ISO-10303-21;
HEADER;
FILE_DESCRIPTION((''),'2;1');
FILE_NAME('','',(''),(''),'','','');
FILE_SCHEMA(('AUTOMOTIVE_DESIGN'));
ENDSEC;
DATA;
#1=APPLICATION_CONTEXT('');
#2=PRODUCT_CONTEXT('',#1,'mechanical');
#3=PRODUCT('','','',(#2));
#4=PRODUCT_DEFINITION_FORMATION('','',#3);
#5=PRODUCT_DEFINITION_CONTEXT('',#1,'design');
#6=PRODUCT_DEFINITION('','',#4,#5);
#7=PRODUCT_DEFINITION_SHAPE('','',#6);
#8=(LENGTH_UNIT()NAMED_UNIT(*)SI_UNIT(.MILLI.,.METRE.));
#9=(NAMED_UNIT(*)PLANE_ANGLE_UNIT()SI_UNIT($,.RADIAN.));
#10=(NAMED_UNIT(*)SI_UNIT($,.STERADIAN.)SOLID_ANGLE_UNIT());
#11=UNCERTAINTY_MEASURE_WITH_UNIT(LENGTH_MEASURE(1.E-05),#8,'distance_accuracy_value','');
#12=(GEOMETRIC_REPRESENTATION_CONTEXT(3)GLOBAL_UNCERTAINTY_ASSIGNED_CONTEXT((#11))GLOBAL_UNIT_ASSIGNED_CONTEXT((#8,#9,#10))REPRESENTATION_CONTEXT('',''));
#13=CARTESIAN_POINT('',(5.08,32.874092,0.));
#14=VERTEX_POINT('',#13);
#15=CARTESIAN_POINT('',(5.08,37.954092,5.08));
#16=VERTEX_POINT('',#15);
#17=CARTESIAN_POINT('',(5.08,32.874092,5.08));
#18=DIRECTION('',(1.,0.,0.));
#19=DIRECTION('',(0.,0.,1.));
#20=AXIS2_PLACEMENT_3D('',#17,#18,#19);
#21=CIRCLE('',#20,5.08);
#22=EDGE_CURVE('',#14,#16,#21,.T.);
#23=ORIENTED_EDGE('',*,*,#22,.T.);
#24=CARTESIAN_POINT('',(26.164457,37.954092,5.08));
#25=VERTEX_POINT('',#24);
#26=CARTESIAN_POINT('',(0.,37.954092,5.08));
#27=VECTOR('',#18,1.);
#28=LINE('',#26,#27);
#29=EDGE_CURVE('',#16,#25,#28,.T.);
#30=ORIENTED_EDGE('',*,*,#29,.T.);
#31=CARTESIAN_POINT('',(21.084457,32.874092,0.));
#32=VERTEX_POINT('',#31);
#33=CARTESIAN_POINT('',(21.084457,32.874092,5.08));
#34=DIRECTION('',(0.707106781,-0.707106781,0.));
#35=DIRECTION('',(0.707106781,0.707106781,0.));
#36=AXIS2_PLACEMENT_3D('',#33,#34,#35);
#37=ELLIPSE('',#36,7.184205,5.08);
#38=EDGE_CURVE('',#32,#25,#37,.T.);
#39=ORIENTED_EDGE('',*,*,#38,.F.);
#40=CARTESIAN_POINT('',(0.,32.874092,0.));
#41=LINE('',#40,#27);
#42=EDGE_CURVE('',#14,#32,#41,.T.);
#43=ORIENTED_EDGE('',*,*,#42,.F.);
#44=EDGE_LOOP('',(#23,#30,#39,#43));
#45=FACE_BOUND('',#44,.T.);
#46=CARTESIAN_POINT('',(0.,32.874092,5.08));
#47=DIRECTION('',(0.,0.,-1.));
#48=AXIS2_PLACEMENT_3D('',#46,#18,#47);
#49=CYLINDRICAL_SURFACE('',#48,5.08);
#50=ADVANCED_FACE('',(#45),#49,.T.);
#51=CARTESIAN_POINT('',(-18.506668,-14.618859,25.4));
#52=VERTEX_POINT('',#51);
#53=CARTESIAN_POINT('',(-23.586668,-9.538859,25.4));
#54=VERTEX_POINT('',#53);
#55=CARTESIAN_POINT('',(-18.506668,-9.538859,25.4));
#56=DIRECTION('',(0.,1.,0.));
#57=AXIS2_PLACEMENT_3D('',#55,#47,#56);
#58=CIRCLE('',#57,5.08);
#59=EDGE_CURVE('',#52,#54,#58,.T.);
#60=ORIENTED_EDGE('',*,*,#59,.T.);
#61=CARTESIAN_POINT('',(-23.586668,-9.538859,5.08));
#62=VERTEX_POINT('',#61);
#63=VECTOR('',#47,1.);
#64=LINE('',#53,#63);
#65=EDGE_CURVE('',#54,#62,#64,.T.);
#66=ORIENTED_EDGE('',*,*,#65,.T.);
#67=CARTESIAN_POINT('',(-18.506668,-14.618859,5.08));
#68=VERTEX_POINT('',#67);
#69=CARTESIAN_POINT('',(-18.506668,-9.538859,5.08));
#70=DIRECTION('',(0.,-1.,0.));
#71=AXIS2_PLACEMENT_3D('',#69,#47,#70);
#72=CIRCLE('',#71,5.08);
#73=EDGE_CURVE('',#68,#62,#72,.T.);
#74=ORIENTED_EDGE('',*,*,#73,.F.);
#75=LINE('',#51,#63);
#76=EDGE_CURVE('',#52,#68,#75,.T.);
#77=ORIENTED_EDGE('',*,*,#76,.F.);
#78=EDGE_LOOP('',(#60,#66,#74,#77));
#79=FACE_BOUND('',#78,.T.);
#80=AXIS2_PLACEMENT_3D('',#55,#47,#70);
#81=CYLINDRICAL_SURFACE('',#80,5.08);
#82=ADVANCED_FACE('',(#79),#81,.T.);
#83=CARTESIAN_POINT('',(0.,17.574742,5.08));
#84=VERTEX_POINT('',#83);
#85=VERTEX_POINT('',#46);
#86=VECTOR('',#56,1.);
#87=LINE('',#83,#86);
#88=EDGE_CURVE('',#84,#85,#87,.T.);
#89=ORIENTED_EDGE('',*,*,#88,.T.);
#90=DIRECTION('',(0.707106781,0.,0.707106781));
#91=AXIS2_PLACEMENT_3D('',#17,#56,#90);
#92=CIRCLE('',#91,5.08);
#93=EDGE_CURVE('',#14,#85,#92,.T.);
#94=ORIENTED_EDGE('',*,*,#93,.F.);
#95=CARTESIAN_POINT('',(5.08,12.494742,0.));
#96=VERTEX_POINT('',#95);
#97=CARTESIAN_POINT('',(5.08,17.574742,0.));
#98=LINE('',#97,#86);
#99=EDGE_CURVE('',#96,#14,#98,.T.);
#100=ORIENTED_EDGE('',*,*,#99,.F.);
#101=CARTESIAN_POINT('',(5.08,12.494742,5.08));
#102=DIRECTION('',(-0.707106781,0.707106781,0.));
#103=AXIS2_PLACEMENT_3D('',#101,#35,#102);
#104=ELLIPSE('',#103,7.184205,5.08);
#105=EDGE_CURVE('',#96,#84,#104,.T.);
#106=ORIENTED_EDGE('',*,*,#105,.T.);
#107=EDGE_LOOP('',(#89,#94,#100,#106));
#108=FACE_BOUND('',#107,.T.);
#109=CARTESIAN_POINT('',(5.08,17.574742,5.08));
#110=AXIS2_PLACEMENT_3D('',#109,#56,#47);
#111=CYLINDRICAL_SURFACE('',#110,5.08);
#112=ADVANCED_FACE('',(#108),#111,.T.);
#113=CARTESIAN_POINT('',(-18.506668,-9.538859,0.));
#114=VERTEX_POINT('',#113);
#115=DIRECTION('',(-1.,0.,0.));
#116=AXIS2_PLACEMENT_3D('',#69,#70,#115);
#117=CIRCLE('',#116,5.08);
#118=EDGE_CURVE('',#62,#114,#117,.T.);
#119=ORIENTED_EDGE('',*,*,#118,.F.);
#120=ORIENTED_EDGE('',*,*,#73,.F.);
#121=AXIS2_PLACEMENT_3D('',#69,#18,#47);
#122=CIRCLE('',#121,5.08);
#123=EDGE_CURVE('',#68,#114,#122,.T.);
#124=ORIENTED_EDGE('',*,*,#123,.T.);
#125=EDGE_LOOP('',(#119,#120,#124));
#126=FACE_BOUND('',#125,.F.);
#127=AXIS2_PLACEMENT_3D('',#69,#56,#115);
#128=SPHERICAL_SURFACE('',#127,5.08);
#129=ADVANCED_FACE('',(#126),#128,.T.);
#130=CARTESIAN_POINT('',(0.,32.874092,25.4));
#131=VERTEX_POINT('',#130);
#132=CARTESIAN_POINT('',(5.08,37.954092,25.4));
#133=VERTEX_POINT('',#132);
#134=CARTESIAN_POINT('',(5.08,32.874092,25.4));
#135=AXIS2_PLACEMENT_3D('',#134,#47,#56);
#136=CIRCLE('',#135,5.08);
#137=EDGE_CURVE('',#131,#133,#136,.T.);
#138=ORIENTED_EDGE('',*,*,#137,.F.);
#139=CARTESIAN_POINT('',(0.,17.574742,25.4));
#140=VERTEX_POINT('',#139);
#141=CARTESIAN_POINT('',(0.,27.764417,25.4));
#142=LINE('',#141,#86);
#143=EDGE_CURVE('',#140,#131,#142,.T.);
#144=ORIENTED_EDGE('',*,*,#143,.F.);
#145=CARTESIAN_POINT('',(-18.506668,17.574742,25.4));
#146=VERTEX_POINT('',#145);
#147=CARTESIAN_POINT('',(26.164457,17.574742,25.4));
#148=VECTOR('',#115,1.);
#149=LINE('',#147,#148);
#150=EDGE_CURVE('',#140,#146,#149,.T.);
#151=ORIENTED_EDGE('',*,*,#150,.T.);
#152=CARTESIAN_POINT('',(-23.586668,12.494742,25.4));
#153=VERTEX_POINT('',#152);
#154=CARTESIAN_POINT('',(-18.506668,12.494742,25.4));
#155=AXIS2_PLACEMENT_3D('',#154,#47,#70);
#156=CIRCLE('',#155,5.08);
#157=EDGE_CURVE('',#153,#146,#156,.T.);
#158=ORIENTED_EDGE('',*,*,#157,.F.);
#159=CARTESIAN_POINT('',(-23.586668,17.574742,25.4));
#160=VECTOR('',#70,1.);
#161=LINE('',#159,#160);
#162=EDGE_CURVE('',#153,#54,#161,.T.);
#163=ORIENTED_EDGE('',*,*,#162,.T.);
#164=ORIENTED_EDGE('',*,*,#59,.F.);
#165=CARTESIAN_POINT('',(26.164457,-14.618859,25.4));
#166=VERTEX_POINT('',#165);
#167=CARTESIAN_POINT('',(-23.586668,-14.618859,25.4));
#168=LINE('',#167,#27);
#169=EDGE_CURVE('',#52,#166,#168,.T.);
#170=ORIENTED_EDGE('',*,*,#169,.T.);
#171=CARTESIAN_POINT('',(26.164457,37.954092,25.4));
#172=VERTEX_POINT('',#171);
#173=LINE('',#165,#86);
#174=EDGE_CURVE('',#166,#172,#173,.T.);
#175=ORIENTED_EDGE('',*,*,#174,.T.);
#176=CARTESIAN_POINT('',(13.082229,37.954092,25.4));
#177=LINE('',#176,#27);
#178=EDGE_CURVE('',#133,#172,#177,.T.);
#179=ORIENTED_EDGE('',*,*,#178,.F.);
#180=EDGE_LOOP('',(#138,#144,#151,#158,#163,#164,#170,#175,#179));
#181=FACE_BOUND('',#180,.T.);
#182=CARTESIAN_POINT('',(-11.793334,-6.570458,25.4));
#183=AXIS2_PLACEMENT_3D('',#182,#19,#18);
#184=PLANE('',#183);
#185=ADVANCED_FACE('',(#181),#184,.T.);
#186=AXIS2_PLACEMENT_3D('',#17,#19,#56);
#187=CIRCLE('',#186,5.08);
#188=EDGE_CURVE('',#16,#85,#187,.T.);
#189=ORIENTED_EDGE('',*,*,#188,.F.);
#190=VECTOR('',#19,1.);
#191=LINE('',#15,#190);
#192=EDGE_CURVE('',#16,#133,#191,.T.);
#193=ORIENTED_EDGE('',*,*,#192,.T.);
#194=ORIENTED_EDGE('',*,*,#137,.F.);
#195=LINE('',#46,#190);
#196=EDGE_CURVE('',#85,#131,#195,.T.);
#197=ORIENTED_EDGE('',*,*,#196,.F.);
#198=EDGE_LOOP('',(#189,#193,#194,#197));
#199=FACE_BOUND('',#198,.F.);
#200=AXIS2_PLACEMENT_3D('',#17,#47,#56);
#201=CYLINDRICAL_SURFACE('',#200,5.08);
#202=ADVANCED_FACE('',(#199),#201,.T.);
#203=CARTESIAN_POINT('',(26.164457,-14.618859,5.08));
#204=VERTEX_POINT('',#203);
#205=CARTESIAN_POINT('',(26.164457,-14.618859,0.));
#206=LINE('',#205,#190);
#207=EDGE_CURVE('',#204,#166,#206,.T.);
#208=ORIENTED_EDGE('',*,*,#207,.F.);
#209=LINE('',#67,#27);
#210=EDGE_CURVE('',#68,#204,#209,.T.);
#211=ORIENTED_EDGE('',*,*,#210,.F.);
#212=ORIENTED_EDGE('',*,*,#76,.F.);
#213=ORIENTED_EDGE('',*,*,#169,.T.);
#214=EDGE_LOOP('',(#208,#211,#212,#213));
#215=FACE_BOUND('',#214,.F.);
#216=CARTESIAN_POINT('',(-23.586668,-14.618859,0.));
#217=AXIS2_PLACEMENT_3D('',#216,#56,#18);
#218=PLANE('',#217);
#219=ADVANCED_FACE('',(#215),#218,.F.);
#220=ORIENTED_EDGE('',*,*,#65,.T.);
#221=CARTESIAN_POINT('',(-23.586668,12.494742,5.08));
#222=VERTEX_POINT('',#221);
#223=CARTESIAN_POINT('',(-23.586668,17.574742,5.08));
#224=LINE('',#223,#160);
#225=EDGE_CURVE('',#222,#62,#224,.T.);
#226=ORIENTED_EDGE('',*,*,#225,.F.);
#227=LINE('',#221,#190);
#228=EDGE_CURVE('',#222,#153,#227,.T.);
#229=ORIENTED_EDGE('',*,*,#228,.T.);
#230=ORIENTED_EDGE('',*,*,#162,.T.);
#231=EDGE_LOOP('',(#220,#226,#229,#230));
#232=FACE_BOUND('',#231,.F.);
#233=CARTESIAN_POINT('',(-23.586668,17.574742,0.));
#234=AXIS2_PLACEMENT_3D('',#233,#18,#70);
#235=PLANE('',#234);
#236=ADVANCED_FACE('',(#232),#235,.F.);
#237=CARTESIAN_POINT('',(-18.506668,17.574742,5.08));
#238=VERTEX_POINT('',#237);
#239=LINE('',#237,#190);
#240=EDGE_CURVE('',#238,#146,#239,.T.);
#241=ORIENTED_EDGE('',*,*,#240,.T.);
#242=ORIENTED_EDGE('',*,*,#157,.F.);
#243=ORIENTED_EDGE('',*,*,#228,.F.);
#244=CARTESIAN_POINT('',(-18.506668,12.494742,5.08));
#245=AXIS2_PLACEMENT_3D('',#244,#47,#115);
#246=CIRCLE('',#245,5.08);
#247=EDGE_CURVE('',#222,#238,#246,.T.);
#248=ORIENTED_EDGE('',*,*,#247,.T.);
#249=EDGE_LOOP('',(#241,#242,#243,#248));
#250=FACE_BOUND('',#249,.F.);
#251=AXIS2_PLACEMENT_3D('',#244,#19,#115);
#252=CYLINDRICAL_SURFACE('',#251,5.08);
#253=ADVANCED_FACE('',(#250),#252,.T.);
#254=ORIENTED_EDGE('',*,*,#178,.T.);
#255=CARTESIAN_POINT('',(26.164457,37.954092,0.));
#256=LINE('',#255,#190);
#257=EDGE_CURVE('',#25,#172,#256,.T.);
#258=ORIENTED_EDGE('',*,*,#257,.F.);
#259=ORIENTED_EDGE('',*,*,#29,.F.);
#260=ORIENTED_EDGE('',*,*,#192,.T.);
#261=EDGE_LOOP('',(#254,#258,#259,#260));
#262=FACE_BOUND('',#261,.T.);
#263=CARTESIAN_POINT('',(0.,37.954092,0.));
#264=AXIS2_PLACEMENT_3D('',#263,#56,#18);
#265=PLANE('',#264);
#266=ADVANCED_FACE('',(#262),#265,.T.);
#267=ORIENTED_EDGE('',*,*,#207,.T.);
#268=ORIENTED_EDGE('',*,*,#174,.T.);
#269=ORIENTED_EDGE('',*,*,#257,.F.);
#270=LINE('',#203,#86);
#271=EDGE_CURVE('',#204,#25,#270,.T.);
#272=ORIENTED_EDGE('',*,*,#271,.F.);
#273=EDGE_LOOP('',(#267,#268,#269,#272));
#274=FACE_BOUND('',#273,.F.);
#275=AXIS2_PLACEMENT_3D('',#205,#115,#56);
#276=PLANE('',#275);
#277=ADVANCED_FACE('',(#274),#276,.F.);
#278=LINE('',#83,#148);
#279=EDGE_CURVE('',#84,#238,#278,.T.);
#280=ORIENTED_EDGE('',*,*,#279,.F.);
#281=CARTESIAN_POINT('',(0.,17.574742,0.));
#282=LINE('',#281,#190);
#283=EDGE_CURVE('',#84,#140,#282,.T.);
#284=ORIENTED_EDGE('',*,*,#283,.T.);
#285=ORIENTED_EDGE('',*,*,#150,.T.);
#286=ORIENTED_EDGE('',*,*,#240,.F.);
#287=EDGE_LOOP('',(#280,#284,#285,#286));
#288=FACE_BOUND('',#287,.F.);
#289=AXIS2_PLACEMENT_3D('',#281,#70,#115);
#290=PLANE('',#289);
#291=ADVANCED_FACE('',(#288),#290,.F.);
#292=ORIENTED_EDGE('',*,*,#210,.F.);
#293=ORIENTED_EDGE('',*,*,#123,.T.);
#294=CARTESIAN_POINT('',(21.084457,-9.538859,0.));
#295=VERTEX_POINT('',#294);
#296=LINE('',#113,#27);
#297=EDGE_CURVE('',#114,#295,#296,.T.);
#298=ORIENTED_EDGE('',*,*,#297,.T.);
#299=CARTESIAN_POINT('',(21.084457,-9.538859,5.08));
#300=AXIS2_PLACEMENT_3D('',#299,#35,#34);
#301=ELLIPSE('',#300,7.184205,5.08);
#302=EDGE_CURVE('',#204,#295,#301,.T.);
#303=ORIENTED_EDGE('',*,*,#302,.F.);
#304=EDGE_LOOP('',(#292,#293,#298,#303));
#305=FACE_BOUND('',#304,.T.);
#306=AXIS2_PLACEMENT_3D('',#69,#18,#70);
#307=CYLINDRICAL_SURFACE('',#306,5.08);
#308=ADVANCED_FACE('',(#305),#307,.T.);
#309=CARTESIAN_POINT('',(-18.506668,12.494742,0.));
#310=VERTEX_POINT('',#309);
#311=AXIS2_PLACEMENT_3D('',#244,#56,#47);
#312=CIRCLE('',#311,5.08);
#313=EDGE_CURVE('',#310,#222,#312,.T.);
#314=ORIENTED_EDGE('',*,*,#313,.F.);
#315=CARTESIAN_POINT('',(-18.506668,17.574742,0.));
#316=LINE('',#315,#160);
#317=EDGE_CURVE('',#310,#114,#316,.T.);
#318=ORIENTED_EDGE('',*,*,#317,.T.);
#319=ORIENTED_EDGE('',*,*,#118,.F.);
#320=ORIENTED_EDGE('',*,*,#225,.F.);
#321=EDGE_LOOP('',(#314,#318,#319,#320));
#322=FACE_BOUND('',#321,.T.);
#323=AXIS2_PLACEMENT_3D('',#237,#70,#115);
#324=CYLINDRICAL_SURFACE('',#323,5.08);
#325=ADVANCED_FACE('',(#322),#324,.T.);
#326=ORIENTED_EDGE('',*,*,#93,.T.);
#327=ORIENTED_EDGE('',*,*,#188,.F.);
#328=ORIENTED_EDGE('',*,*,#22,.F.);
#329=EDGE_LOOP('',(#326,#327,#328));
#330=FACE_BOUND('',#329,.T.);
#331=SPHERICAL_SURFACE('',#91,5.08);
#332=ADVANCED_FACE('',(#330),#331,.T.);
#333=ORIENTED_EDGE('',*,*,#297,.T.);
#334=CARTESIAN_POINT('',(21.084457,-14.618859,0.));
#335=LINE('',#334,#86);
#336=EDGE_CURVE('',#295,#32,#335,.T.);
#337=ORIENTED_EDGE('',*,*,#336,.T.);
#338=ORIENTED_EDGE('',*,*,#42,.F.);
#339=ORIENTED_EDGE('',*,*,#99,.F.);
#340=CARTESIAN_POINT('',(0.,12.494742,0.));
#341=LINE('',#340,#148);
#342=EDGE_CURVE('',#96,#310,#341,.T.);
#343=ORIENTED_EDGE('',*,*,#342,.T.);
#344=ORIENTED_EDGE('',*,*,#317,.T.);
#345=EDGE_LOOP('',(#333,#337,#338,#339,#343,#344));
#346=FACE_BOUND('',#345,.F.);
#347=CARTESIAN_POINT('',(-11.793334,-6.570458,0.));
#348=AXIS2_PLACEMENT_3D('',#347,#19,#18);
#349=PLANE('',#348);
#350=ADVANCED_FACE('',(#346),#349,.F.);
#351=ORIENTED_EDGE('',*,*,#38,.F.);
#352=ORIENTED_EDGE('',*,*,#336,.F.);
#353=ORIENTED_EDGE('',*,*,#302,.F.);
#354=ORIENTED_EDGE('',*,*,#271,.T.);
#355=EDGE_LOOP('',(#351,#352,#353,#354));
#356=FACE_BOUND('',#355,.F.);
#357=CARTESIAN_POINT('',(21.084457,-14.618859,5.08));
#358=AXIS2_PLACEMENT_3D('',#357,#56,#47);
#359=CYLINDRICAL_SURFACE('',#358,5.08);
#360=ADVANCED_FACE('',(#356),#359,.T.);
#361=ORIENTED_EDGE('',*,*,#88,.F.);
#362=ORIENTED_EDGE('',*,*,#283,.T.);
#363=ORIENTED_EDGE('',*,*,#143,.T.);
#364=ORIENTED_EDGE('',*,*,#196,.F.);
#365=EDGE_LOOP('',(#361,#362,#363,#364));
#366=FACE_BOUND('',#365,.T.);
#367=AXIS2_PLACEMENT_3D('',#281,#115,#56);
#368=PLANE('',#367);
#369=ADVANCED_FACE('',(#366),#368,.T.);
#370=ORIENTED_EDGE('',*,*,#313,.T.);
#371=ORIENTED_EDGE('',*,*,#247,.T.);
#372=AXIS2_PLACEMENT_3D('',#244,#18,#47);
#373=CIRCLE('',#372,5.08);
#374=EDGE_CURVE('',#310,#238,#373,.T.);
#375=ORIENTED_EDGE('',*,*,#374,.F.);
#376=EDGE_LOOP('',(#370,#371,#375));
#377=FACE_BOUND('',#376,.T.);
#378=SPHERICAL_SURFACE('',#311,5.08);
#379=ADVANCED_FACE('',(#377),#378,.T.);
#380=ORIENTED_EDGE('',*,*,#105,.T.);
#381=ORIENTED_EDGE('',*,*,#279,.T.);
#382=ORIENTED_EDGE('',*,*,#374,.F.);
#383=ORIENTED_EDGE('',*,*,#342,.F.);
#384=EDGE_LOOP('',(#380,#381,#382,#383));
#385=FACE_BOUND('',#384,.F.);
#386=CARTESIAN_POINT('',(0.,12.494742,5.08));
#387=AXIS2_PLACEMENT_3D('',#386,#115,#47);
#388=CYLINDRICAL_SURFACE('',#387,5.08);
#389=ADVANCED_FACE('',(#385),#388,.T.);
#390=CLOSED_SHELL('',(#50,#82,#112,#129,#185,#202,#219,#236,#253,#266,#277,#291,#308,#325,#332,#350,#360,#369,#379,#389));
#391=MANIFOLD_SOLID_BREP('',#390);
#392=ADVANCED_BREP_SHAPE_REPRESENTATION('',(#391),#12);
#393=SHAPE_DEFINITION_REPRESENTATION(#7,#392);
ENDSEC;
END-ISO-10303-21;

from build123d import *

# Parameters (mm, degrees)
F0_W        = 23.5866680741
F0_H        = 16.0968005657
F0_W_2      = 26.164457202
F0_H_2      = 20.3793495893
F1_DEPTH    = 25.4
F2_R        = 5.08
F3_R        = 5.08
F4_T1_DEPTH = 33.02
F4_S5_W     = 5.08
F4_S5_H     = 5.08
F4_T6_DEPTH = 5.08


# Not quite as in the source:
# - a fillet or chamfer that OpenCascade refuses, or shapes differently, is made with other operations: its cross-section is extruded or revolved along the edge and cut away or added


with BuildPart() as f1:
    # F0 (on Top) → F1 (new body)
    with BuildSketch(Plane.XY):
        with Locations((-11.7933340371, -6.5704584122)):
            Rectangle(F0_W, F0_H)
        with Locations((13.082228601, 9.5263421535)):
            Rectangle(F0_W_2, F0_H)
        with Locations((-11.7933340371, 9.5263421535)):
            Rectangle(F0_W, F0_H)
        with Locations((13.082228601, 27.7644172311)):
            Rectangle(F0_W_2, F0_H_2)
        with Locations((13.082228601, -6.5704584122)):
            Rectangle(F0_W_2, F0_H)
    extrude(amount=F1_DEPTH)

    # F2
    f2_edges = [f1.edges().sort_by_distance(p)[0] for p in [
        (-23.586668, 1.477942, 0),
    ]]
    fillet(f2_edges, radius=F2_R)

    # F3
    f3_edges = [f1.edges().sort_by_distance(p)[0] for p in [
        (3.828895, -14.618859, 0),
        (-18.506668, 1.477942, 0),
        (26.164457, 11.667617, 0),
        (-9.253334, 17.574742, 0),
        (13.082229, 37.954092, 0),
        (0, 27.764417, 0),
    ]]
    fillet(f3_edges, radius=F3_R)

    # F4: fillet of radius 5.08 on 1 edges, made by hand

    # F4_s2 → F4_t1 (cut)
    with BuildSketch(Plane.XY.offset(5.08)):
        with BuildLine():
            ThreePointArc((5.08, 37.9540920258), (1.4878975516, 36.4661944742), (0, 32.8740920258))
            Line((0, 32.8740920258), (0, 37.9540920258))
            Line((0, 37.9540920258), (5.08, 37.9540920258))
        make_face()
    extrude(amount=F4_T1_DEPTH, mode=Mode.SUBTRACT)


with BuildPart() as f4_tool4:
    # F4_s5 → F4_t6 (new body)
    with BuildSketch(Plane.XZ.offset(-32.8740920258)):
        with Locations((2.54, 2.54)):
            Rectangle(F4_S5_W, F4_S5_H)
    extrude(amount=-F4_T6_DEPTH)

    # F4_s7 → F4_t8 (revolve, cut)
    with BuildSketch(Plane(origin=(5.08, 32.8740920258, 5.08), x_dir=(0.7071067812, 0, 0.7071067812), z_dir=(-0.7071067812, 0, 0.7071067812))):
        with BuildLine():
            ThreePointArc((0, -5.08), (5.08, 0), (0, 5.08))
            Line((0, 5.08), (0, -5.08))
        make_face()
    revolve(axis=Axis((5.08, 32.8740920258, 5.08), (0, 1, 0)), mode=Mode.SUBTRACT)


with BuildPart() as f1_1:
    add(f1.part)

    # F4_t3: cut F4_tool4
    add(f4_tool4.part, mode=Mode.SUBTRACT)


solid = f1_1.part
